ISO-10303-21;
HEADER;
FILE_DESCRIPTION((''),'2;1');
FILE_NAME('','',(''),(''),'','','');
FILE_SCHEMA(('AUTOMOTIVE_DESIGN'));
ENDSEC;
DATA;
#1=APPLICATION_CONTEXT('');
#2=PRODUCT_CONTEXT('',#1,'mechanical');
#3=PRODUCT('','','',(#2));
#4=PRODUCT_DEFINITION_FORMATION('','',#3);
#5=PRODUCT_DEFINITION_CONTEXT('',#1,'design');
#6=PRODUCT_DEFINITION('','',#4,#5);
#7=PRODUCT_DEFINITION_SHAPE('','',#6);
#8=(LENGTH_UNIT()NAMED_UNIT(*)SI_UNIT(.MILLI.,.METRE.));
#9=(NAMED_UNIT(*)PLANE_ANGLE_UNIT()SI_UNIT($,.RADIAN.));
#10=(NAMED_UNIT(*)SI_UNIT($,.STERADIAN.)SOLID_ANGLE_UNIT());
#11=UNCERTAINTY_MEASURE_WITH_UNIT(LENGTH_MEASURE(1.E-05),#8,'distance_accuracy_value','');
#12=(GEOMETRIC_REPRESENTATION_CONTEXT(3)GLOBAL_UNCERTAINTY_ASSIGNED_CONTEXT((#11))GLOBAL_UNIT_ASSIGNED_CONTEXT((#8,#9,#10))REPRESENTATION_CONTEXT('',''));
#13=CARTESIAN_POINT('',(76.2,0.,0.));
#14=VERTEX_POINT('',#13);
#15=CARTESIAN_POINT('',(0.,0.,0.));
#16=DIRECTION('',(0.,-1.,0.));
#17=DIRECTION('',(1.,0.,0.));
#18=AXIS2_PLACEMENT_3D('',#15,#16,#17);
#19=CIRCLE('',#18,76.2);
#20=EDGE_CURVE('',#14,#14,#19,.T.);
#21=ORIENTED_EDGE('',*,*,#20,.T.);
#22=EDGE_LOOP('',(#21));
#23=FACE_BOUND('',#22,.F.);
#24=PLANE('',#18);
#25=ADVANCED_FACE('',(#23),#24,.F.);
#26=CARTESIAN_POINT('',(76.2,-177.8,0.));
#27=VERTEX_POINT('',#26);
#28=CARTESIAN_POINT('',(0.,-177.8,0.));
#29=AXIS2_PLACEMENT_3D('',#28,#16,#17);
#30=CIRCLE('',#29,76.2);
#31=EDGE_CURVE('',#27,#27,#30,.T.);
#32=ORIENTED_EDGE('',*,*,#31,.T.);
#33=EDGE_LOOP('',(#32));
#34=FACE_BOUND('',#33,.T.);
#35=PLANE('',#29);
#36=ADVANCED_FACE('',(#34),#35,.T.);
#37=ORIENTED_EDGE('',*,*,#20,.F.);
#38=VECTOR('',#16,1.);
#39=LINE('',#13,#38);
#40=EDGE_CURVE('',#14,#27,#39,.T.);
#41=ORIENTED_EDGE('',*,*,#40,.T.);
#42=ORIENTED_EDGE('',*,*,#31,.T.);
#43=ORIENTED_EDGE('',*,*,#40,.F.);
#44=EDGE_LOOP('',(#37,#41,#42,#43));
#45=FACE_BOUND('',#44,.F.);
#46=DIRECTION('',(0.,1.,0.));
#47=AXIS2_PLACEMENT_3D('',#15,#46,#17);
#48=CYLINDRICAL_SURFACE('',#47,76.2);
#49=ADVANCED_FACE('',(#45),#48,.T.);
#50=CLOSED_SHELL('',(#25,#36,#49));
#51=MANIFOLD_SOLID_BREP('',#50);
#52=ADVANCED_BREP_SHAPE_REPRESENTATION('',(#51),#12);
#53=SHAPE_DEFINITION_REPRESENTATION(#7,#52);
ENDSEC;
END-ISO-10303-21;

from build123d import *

# Parameters (mm, degrees)
F1_R     = 76.2
F2_DEPTH = 177.8


# Not quite as in the source:
# - a variable given as a bare number and used for a length is read in inches; the dataset says mm whatever the document's units were


with BuildPart() as f2:
    # F1 (on Front) → F2 (new body)
    with BuildSketch(Plane.XZ):
        Circle(F1_R)
    extrude(amount=F2_DEPTH)


solid = f2.part
